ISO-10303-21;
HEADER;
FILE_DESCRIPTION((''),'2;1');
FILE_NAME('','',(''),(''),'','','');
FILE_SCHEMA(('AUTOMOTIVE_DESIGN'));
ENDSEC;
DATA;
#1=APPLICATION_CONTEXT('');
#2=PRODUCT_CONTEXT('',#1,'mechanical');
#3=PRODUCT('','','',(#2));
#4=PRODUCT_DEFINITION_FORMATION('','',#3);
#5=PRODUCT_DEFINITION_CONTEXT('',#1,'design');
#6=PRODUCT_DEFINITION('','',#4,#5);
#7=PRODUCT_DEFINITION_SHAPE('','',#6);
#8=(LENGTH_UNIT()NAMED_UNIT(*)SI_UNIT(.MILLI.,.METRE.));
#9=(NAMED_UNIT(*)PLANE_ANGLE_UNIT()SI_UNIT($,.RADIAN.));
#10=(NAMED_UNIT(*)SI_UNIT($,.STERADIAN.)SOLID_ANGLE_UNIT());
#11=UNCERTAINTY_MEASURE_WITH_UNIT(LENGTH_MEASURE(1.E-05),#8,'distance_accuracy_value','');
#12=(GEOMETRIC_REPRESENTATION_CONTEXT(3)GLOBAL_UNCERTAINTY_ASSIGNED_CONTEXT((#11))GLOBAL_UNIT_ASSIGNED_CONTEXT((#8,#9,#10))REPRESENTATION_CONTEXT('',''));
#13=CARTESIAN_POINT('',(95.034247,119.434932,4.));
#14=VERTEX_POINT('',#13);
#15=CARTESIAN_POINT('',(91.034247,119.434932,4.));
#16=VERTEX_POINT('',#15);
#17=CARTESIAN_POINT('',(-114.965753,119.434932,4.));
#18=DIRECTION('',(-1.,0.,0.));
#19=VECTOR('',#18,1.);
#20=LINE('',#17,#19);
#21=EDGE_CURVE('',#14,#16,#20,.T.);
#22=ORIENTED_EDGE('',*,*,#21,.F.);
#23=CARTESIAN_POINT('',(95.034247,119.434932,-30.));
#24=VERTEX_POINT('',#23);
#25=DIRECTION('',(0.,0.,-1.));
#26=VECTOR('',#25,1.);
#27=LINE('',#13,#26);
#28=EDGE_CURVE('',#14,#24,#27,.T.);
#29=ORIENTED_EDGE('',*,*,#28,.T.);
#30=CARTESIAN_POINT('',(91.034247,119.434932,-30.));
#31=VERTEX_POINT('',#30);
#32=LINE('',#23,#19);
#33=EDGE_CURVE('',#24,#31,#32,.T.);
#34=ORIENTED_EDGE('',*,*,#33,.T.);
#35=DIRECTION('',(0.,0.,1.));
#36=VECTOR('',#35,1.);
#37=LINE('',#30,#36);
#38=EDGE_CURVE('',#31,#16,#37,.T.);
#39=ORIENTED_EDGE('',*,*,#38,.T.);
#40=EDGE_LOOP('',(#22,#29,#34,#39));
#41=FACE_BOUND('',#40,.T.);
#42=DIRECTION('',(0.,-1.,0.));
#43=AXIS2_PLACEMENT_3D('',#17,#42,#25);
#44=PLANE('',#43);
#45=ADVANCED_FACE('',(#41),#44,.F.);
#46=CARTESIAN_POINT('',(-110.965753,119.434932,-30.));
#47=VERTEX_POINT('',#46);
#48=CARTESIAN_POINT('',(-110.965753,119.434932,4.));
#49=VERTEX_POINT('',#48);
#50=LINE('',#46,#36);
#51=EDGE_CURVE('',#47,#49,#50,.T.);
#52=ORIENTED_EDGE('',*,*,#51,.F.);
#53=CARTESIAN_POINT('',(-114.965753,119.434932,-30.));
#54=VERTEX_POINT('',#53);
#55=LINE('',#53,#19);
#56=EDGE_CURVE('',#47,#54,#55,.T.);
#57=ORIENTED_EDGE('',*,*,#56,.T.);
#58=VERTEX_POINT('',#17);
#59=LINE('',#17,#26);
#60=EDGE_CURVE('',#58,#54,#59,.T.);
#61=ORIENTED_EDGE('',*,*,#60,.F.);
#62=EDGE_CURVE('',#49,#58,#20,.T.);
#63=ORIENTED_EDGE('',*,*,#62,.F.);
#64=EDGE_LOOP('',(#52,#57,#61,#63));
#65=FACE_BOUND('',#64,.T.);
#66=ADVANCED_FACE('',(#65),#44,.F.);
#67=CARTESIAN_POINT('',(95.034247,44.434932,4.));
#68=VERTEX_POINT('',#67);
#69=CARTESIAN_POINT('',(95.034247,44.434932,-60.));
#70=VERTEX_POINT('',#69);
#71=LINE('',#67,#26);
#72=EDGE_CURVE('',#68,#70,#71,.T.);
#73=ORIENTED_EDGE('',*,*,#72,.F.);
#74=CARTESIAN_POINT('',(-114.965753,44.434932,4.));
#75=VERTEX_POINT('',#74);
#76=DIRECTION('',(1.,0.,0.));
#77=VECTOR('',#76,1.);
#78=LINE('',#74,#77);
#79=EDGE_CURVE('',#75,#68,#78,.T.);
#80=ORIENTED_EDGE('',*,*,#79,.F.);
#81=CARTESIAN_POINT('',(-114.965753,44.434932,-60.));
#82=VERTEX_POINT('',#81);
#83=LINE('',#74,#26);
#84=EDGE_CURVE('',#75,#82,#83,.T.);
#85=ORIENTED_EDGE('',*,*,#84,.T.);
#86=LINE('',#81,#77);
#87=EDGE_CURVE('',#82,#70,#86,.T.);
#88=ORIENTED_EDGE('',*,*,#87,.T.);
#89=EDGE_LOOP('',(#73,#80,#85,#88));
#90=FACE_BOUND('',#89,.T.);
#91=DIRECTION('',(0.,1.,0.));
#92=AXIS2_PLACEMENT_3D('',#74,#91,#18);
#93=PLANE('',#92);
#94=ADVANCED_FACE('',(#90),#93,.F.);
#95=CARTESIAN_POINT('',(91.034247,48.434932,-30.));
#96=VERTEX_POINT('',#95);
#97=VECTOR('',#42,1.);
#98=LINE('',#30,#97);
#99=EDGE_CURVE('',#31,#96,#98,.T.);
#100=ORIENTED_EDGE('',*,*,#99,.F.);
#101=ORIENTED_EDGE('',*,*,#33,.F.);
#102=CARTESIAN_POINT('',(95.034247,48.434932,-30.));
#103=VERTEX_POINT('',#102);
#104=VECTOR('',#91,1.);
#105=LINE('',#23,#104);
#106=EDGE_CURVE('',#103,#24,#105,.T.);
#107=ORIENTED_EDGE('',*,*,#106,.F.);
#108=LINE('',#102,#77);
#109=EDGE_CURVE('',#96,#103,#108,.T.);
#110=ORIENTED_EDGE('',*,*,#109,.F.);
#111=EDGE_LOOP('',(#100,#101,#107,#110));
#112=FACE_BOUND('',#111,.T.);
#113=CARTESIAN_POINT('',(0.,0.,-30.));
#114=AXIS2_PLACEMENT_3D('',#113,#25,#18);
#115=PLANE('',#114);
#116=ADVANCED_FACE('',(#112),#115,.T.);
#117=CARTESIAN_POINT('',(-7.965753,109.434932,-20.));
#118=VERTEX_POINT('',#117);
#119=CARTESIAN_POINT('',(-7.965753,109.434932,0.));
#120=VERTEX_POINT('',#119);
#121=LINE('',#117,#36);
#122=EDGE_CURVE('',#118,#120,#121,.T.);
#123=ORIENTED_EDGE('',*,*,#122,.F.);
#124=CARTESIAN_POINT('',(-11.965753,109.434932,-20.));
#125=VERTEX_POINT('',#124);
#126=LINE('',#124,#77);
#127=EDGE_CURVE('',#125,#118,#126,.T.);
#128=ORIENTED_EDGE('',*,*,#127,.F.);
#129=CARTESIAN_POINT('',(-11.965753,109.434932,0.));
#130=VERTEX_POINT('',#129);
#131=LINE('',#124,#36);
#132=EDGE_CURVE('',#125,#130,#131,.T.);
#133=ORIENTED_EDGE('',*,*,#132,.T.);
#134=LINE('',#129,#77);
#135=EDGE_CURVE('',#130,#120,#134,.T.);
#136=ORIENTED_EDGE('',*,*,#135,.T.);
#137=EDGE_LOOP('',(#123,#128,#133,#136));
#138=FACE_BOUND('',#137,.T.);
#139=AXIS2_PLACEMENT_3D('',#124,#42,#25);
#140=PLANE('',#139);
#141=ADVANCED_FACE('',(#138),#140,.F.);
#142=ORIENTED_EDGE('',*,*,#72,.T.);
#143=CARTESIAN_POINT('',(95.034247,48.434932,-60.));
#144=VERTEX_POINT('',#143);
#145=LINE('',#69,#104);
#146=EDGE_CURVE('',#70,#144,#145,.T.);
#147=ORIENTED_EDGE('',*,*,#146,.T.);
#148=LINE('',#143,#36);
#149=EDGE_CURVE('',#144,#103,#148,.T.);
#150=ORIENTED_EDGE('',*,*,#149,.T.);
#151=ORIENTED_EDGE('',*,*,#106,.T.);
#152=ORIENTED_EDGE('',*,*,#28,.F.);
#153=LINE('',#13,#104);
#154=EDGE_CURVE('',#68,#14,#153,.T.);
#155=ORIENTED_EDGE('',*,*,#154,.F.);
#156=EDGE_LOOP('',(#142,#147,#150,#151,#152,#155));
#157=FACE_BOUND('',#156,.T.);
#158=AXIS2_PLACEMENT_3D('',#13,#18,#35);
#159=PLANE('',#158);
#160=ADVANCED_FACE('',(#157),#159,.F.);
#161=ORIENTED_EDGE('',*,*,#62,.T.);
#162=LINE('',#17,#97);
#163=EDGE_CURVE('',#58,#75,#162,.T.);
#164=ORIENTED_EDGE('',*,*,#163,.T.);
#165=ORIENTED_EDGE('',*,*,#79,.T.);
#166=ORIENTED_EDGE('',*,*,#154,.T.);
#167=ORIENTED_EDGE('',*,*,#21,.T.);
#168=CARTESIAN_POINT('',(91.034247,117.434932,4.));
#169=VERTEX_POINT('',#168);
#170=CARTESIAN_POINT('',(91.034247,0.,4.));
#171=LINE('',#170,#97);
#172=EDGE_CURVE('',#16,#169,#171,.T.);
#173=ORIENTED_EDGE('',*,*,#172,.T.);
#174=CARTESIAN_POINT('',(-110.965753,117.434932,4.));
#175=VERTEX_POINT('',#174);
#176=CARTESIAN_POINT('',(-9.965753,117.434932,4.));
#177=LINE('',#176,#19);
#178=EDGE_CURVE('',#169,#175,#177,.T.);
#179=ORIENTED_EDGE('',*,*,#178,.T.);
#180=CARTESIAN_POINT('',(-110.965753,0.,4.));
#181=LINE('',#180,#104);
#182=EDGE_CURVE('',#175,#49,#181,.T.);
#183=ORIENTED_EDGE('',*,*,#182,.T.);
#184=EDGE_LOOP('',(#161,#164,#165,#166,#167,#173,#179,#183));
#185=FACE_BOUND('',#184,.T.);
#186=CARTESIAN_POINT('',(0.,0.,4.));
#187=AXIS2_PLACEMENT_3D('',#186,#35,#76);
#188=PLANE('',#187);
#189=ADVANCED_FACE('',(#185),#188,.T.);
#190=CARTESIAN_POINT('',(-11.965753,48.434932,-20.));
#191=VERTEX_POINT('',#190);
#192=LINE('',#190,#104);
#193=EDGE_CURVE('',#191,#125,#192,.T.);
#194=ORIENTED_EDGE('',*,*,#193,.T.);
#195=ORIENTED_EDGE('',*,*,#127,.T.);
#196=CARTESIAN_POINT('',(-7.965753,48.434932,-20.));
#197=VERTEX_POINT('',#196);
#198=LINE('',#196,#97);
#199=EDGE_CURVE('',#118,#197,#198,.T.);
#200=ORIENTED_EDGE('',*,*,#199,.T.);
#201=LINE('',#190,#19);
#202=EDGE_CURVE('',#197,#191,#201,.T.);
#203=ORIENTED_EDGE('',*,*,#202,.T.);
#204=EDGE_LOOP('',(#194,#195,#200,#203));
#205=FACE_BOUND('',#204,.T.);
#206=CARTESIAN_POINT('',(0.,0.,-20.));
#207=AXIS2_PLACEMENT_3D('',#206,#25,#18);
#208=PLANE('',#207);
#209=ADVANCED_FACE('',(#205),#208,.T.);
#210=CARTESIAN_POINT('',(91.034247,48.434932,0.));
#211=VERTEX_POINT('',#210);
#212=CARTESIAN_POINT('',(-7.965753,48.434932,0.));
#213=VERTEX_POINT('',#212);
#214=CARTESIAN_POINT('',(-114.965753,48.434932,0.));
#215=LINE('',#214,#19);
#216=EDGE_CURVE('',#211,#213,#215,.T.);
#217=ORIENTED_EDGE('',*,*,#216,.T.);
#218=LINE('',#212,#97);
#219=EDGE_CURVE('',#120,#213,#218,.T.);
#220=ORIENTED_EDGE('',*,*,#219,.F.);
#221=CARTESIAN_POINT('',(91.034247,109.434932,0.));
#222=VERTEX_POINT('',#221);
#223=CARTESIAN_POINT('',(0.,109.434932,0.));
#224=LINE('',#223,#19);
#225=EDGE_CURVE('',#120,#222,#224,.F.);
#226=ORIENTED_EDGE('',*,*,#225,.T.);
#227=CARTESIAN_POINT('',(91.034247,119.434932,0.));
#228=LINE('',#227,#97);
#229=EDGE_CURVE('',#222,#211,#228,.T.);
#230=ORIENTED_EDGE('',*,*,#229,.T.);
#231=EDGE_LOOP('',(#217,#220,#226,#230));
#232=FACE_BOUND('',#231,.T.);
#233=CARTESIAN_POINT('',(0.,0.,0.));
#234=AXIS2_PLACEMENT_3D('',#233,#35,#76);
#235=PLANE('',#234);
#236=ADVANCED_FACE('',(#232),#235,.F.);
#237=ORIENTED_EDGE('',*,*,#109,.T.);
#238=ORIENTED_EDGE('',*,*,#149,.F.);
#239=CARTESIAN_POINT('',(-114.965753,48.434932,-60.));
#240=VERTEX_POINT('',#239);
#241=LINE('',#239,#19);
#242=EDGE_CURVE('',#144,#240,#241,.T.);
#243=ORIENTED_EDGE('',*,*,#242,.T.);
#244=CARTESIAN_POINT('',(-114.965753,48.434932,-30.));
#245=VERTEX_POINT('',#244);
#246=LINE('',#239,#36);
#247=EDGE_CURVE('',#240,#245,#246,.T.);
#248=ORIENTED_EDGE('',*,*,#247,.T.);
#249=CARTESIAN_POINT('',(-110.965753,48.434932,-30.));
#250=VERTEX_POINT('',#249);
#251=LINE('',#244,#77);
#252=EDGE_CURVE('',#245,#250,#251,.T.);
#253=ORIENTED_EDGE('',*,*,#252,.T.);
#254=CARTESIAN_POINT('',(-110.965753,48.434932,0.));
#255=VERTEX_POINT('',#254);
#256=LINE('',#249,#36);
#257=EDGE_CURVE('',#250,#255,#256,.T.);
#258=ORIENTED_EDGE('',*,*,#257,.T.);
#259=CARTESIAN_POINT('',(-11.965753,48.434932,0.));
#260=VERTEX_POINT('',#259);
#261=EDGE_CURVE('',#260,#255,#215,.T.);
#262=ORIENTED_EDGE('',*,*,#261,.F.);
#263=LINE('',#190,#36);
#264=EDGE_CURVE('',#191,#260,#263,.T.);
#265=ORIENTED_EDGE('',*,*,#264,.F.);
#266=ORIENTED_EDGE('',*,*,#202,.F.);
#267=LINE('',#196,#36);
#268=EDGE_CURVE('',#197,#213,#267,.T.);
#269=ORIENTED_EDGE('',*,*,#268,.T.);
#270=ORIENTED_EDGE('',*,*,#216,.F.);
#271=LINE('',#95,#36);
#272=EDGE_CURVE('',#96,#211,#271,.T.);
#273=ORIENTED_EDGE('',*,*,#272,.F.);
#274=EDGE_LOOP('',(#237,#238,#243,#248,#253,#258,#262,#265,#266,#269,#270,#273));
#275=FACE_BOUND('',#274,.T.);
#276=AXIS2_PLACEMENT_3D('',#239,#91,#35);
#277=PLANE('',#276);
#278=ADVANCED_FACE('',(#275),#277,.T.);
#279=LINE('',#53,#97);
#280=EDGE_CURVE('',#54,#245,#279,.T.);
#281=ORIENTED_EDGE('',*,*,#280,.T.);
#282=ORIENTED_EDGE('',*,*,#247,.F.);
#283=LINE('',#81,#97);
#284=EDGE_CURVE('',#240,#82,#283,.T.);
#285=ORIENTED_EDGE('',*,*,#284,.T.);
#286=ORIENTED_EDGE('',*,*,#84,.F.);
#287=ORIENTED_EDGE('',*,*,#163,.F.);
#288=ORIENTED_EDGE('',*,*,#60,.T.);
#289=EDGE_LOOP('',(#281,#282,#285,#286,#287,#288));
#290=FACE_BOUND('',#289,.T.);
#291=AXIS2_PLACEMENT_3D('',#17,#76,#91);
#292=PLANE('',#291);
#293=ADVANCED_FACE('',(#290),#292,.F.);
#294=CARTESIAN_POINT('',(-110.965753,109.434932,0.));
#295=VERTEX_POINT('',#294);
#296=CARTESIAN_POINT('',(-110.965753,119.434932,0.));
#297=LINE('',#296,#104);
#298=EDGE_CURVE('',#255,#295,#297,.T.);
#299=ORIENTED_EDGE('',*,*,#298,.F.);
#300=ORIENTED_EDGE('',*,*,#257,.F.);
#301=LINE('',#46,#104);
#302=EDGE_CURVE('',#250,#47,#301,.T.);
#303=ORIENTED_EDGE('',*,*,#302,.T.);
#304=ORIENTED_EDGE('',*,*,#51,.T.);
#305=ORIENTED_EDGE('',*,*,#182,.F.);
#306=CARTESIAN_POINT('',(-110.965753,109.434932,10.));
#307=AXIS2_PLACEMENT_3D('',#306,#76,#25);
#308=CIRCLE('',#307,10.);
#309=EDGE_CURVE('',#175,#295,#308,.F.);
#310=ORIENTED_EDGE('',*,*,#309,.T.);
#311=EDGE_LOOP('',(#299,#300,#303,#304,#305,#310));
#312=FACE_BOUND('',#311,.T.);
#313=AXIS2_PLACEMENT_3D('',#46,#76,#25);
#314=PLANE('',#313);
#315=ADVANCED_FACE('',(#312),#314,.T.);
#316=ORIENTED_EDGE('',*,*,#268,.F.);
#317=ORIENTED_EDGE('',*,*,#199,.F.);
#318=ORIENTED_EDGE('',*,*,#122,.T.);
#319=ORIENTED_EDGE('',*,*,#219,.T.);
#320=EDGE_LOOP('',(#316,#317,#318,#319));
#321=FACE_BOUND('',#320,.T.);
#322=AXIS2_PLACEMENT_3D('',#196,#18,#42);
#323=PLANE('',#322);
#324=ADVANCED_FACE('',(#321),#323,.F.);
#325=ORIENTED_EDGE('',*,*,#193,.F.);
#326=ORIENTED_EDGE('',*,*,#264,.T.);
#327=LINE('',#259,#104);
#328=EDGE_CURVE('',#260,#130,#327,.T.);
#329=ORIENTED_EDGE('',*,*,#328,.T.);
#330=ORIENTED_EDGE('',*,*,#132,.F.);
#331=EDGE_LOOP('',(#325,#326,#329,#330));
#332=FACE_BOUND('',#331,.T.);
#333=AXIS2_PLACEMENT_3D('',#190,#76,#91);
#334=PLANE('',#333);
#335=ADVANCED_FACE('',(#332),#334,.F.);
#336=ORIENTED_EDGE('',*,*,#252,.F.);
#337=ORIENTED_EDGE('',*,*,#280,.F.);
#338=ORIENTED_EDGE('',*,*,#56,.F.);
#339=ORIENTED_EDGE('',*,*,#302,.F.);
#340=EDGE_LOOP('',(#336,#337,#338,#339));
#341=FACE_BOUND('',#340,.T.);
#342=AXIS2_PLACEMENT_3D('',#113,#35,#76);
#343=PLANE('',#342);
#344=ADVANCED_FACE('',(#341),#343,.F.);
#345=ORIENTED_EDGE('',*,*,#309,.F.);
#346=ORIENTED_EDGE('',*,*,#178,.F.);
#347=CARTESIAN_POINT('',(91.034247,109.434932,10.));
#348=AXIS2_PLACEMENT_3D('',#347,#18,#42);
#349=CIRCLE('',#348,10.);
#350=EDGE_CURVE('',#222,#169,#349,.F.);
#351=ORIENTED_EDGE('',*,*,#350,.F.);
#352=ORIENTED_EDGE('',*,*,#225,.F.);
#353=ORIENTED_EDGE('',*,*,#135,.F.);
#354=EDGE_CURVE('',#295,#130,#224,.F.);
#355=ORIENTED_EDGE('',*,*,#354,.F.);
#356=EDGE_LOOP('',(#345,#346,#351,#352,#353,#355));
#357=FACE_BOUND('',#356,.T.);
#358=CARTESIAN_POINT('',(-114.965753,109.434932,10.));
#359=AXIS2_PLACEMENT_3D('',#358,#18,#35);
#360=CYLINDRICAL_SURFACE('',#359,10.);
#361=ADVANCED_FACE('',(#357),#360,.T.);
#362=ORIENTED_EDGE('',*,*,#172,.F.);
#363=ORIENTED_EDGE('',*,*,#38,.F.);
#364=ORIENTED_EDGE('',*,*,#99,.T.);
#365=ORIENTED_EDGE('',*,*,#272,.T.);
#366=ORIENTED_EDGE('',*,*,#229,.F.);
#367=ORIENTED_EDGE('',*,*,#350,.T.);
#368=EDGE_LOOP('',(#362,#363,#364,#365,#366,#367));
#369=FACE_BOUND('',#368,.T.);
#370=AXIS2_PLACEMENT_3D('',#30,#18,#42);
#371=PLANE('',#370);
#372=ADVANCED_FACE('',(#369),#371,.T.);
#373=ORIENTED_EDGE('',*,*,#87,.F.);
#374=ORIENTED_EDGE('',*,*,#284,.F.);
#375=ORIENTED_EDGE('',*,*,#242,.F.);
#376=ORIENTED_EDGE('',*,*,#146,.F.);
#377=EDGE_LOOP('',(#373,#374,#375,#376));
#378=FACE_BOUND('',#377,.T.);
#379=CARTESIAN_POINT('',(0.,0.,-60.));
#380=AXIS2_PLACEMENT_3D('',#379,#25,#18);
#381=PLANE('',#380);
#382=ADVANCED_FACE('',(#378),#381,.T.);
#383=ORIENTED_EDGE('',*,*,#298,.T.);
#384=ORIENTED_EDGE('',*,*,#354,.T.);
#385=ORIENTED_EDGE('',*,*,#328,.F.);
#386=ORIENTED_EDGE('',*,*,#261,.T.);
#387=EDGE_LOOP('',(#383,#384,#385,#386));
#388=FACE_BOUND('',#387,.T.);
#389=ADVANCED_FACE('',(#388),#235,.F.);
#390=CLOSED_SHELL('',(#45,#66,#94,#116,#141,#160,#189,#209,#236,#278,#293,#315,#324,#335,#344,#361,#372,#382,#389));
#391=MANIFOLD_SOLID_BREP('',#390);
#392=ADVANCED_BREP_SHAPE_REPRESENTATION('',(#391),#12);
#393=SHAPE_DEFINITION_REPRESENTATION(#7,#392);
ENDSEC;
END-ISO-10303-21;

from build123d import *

# Parameters (mm, degrees)
SKETCH1_W           = 210
SKETCH1_H           = 75
BOSS_EXTRUDE1_DEPTH = 4
SKETCH2_W           = 210
SKETCH2_H           = 4
BOSS_EXTRUDE2_DEPTH = 60
SKETCH3_W           = 4
SKETCH3_H           = 71
BOSS_EXTRUDE3_DEPTH = 30
FILLET1_R           = 10
SKETCH5_W           = 4
SKETCH5_H           = 61
BOSS_EXTRUDE4_DEPTH = 20


with BuildPart() as part:
    # Sketch1 → Boss-Extrude1 (new body)
    with BuildSketch(Plane.XY):
        with Locations((-9.965753425, 81.934931507)):
            Rectangle(SKETCH1_W, SKETCH1_H)
    extrude(amount=BOSS_EXTRUDE1_DEPTH)

    # Sketch2 → Boss-Extrude2 (add)
    with BuildSketch(Plane.XY):
        with Locations((-9.965753425, 46.434931507)):
            Rectangle(SKETCH2_W, SKETCH2_H)
    extrude(amount=-BOSS_EXTRUDE2_DEPTH)

    # Sketch3 → Boss-Extrude3 (add)
    with BuildSketch(Plane.XY):
        with Locations((-112.965753425, 83.934931507)):
            Rectangle(SKETCH3_W, SKETCH3_H)
        with Locations((93.034246575, 83.934931507)):
            Rectangle(SKETCH3_W, SKETCH3_H)
    extrude(amount=-BOSS_EXTRUDE3_DEPTH)

    # Fillet1
    # the kernel refuses this fillet: 10 mm, written as the material it takes off along each edge
    with BuildSketch(Plane(origin=(-110.965753425, 119.434931507, 0), x_dir=(0, 0, 1), z_dir=(1, 0, 0))) as fillet1_piece_1:
        with BuildLine():
            CenterArc((FILLET1_R, FILLET1_R), FILLET1_R, 180, 90)
            Line((0, FILLET1_R), (0, 0))
            Line((0, 0), (FILLET1_R, 0))
        make_face()
    extrude(amount=202, mode=Mode.SUBTRACT)

    # Sketch5 → Boss-Extrude4 (add)
    with BuildSketch(Plane(origin=(0, 0, 0), x_dir=(-1, 0, 0), z_dir=(0, 0, -1))):
        with Locations((9.965753425, 78.934931507)):
            Rectangle(SKETCH5_W, SKETCH5_H)
    extrude(amount=BOSS_EXTRUDE4_DEPTH)


solid = part.part
